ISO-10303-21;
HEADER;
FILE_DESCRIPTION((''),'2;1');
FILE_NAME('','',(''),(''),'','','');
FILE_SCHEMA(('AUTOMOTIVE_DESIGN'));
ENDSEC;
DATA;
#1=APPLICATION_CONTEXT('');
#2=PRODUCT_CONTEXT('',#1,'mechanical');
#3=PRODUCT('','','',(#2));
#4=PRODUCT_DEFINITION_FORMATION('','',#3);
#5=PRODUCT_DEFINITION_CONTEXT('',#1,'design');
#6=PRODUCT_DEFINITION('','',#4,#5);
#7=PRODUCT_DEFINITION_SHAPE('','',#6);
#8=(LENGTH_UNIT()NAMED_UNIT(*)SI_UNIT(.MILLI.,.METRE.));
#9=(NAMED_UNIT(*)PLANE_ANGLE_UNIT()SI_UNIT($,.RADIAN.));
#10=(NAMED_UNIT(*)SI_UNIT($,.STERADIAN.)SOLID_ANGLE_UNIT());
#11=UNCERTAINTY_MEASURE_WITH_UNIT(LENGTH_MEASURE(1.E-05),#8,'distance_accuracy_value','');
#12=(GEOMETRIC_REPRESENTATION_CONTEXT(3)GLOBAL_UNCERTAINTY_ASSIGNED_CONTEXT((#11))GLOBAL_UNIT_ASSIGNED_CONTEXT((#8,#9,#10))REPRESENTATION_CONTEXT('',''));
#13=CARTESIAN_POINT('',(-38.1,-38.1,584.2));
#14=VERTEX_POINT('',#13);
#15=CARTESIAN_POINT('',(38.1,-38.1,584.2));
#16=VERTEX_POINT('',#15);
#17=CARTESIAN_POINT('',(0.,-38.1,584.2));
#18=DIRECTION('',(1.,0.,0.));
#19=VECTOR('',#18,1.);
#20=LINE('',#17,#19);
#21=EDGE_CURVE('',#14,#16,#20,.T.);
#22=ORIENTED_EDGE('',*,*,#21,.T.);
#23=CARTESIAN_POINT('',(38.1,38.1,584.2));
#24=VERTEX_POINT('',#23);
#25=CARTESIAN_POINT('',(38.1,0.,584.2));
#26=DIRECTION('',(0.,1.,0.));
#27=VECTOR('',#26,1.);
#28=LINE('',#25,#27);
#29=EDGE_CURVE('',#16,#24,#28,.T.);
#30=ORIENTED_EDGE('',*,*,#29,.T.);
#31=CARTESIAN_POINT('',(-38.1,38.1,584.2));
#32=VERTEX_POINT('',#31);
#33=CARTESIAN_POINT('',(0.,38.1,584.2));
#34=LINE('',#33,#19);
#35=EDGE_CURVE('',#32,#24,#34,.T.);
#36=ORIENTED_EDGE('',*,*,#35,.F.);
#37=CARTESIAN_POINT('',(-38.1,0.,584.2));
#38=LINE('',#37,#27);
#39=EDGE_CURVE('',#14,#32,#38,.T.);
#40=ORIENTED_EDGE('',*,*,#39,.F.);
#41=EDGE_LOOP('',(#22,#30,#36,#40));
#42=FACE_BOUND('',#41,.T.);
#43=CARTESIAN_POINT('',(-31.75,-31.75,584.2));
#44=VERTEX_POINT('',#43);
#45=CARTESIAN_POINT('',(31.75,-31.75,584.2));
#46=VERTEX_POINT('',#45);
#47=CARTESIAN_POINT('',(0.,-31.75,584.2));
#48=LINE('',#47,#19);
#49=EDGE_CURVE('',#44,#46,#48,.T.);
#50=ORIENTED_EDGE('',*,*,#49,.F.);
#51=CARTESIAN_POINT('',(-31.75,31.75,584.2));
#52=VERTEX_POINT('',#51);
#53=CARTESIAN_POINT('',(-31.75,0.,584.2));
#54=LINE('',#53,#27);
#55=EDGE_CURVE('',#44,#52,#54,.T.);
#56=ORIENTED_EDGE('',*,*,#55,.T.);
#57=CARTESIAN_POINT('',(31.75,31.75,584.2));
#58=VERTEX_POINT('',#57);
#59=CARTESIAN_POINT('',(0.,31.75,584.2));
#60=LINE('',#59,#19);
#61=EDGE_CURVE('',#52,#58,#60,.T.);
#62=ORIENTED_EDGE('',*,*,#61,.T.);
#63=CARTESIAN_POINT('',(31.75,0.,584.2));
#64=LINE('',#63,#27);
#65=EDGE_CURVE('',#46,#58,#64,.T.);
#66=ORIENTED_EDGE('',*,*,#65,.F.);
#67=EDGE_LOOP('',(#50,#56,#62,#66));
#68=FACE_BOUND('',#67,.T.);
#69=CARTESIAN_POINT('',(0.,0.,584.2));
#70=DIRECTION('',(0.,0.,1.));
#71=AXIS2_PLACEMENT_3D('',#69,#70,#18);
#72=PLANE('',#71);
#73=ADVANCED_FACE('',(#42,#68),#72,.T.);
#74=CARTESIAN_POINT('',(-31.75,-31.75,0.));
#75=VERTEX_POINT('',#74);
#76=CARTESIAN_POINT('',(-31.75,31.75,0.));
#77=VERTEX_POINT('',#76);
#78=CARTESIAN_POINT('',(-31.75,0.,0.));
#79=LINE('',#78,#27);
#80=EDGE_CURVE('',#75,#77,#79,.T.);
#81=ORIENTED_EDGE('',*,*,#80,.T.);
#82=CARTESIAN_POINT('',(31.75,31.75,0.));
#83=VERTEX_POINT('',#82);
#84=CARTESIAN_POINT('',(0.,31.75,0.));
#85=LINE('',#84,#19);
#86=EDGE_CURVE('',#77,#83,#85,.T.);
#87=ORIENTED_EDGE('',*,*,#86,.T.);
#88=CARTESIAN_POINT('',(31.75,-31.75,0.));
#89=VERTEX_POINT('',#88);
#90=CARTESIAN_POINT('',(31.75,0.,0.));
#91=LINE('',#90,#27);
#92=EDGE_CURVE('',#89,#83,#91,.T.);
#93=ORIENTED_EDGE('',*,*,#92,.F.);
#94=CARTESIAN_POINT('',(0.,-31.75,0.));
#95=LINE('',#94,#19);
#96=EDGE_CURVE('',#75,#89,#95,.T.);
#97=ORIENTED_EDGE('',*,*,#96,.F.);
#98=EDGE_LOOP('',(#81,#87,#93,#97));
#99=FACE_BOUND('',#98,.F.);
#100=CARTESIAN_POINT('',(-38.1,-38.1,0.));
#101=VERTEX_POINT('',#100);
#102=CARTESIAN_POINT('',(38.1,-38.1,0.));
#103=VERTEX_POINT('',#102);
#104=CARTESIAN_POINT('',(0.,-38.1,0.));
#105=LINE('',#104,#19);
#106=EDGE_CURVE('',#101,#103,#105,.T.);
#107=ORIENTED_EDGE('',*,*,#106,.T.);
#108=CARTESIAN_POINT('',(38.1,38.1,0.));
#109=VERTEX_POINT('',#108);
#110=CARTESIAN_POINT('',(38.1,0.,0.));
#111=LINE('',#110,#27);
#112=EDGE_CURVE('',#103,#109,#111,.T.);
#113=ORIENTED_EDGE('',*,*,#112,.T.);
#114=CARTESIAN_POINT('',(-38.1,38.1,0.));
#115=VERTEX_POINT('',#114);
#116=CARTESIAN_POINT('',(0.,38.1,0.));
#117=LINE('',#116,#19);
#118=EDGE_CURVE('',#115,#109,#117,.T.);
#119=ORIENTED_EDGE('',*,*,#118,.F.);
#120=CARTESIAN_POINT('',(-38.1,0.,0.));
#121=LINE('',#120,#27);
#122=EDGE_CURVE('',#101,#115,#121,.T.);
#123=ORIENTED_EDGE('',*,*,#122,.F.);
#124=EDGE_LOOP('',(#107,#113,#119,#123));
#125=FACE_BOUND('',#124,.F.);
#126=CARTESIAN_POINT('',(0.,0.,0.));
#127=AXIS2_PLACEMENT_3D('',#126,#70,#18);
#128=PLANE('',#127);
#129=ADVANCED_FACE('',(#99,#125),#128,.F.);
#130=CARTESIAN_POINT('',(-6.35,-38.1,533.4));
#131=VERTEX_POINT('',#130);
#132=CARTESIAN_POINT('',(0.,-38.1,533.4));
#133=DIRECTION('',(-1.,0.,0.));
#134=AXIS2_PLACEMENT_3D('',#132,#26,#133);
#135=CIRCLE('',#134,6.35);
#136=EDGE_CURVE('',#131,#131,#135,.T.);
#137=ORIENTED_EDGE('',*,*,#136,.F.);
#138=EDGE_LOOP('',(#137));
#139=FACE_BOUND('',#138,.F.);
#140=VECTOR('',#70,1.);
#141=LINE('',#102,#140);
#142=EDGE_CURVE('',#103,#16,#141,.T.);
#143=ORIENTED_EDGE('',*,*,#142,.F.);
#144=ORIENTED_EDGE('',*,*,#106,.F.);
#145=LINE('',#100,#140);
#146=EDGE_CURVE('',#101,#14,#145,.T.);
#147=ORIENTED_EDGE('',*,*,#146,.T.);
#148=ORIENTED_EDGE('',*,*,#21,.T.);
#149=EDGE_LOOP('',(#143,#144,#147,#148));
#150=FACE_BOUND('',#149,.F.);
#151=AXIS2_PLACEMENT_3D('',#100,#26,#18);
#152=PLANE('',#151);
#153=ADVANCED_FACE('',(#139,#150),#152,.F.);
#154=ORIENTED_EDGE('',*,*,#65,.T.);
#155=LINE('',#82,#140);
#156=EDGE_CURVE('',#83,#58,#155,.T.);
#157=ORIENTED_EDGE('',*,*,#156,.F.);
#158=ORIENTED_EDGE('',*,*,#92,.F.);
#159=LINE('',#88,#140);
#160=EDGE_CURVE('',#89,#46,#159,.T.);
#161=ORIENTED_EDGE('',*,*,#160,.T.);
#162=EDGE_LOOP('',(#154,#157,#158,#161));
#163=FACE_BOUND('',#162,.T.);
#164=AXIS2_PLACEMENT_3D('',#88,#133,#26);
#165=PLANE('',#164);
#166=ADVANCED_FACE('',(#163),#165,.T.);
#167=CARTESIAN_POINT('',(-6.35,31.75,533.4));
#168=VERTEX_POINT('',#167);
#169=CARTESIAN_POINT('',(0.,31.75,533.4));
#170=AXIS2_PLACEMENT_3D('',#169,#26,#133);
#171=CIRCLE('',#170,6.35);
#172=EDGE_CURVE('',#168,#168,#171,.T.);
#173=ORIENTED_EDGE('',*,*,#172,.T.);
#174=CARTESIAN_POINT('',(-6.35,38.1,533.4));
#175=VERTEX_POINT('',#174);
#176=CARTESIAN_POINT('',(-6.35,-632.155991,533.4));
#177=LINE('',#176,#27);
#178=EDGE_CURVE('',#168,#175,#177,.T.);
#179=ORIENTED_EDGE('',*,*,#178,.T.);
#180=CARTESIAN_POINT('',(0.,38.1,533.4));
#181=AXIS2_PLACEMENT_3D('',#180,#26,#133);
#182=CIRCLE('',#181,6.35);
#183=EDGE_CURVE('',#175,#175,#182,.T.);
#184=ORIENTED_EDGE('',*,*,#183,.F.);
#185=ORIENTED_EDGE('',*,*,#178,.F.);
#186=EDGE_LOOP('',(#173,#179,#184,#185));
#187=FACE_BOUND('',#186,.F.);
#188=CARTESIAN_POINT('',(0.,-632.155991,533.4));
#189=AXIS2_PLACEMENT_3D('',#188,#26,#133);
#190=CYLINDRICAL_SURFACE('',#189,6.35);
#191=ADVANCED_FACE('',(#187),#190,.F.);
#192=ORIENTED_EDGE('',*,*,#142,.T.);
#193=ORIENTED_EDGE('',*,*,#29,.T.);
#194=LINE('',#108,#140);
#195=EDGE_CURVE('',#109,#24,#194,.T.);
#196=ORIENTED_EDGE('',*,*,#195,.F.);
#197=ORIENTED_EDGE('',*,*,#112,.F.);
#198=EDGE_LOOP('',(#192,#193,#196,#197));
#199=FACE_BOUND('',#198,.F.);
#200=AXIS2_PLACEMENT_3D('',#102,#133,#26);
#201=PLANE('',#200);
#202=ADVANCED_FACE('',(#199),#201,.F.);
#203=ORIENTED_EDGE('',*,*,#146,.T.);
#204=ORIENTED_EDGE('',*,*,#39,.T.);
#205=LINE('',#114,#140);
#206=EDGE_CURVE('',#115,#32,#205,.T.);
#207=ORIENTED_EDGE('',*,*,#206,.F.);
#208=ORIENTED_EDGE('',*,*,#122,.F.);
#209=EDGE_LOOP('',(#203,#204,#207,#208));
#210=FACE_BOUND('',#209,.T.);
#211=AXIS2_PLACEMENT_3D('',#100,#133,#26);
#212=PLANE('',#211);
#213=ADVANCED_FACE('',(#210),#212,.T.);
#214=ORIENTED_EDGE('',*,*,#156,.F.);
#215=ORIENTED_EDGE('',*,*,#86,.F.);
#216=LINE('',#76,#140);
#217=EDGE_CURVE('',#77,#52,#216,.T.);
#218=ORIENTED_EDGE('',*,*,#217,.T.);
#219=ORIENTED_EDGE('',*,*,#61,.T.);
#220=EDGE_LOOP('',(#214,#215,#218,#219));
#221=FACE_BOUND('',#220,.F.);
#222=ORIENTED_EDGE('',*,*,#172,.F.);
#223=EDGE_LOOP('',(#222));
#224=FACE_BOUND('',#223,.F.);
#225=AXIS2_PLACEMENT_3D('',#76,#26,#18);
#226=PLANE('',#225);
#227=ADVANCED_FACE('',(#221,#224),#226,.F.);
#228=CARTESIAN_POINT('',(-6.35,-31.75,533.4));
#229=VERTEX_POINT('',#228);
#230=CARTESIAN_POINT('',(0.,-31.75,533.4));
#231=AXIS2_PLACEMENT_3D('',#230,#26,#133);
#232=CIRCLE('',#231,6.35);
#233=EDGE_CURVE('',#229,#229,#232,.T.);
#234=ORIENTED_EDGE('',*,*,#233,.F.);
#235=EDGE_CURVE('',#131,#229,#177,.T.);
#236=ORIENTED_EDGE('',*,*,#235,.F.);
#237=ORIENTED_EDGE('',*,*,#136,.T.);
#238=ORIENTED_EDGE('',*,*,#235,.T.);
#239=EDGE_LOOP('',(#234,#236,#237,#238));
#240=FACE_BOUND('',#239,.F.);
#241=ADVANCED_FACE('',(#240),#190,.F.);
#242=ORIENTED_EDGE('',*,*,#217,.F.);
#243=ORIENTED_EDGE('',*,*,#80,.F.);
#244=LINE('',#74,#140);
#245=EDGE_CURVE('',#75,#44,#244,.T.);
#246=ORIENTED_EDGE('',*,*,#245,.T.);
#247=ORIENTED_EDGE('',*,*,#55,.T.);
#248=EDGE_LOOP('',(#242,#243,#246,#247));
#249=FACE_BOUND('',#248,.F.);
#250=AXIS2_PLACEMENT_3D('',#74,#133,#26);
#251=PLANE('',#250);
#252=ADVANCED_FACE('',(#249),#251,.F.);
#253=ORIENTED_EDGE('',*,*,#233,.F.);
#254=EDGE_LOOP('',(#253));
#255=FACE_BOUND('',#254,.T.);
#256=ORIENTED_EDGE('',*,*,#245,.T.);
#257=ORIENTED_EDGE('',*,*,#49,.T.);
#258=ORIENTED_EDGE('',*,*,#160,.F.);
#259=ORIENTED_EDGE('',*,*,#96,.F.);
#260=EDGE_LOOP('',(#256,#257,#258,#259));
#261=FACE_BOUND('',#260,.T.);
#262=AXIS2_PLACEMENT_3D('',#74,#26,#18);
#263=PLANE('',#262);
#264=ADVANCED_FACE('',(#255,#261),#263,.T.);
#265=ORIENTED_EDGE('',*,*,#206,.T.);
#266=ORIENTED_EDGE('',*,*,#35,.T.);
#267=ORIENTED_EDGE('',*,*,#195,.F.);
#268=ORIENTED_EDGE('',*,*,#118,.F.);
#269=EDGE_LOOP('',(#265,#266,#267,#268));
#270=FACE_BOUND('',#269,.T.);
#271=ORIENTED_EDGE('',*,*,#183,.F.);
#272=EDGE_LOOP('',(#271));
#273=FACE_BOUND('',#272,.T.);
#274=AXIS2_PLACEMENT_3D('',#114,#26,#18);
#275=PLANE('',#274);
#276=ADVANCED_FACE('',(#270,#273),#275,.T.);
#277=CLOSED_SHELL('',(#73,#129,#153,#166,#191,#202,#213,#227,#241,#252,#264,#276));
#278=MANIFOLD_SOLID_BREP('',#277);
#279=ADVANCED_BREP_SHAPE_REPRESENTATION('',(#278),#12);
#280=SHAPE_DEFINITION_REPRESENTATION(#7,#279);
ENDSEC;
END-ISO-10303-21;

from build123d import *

# Parameters (mm, degrees)
F0_W     = 76.2
F0_H     = 76.2
F0_W_2   = 63.5
F0_H_2   = 63.5
F1_DEPTH = 584.2
F3_D     = 12.7


# Not quite as in the source:
# - a length typed as a fraction of an inch, garbled in the dataset ("3 / 203.2 mm" for 3/8 in), is restored


with BuildPart() as f1:
    # F0 (on Top) → F1 (new body)
    with BuildSketch(Plane.XY):
        Rectangle(F0_W, F0_H)
        Rectangle(F0_W_2, F0_H_2, mode=Mode.SUBTRACT)
    extrude(amount=F1_DEPTH)

    # F3 (through all)
    with Locations(Plane.XZ.offset(38.1)):
        with Locations((0, 533.4)):
            Hole(F3_D / 2)


solid = f1.part
